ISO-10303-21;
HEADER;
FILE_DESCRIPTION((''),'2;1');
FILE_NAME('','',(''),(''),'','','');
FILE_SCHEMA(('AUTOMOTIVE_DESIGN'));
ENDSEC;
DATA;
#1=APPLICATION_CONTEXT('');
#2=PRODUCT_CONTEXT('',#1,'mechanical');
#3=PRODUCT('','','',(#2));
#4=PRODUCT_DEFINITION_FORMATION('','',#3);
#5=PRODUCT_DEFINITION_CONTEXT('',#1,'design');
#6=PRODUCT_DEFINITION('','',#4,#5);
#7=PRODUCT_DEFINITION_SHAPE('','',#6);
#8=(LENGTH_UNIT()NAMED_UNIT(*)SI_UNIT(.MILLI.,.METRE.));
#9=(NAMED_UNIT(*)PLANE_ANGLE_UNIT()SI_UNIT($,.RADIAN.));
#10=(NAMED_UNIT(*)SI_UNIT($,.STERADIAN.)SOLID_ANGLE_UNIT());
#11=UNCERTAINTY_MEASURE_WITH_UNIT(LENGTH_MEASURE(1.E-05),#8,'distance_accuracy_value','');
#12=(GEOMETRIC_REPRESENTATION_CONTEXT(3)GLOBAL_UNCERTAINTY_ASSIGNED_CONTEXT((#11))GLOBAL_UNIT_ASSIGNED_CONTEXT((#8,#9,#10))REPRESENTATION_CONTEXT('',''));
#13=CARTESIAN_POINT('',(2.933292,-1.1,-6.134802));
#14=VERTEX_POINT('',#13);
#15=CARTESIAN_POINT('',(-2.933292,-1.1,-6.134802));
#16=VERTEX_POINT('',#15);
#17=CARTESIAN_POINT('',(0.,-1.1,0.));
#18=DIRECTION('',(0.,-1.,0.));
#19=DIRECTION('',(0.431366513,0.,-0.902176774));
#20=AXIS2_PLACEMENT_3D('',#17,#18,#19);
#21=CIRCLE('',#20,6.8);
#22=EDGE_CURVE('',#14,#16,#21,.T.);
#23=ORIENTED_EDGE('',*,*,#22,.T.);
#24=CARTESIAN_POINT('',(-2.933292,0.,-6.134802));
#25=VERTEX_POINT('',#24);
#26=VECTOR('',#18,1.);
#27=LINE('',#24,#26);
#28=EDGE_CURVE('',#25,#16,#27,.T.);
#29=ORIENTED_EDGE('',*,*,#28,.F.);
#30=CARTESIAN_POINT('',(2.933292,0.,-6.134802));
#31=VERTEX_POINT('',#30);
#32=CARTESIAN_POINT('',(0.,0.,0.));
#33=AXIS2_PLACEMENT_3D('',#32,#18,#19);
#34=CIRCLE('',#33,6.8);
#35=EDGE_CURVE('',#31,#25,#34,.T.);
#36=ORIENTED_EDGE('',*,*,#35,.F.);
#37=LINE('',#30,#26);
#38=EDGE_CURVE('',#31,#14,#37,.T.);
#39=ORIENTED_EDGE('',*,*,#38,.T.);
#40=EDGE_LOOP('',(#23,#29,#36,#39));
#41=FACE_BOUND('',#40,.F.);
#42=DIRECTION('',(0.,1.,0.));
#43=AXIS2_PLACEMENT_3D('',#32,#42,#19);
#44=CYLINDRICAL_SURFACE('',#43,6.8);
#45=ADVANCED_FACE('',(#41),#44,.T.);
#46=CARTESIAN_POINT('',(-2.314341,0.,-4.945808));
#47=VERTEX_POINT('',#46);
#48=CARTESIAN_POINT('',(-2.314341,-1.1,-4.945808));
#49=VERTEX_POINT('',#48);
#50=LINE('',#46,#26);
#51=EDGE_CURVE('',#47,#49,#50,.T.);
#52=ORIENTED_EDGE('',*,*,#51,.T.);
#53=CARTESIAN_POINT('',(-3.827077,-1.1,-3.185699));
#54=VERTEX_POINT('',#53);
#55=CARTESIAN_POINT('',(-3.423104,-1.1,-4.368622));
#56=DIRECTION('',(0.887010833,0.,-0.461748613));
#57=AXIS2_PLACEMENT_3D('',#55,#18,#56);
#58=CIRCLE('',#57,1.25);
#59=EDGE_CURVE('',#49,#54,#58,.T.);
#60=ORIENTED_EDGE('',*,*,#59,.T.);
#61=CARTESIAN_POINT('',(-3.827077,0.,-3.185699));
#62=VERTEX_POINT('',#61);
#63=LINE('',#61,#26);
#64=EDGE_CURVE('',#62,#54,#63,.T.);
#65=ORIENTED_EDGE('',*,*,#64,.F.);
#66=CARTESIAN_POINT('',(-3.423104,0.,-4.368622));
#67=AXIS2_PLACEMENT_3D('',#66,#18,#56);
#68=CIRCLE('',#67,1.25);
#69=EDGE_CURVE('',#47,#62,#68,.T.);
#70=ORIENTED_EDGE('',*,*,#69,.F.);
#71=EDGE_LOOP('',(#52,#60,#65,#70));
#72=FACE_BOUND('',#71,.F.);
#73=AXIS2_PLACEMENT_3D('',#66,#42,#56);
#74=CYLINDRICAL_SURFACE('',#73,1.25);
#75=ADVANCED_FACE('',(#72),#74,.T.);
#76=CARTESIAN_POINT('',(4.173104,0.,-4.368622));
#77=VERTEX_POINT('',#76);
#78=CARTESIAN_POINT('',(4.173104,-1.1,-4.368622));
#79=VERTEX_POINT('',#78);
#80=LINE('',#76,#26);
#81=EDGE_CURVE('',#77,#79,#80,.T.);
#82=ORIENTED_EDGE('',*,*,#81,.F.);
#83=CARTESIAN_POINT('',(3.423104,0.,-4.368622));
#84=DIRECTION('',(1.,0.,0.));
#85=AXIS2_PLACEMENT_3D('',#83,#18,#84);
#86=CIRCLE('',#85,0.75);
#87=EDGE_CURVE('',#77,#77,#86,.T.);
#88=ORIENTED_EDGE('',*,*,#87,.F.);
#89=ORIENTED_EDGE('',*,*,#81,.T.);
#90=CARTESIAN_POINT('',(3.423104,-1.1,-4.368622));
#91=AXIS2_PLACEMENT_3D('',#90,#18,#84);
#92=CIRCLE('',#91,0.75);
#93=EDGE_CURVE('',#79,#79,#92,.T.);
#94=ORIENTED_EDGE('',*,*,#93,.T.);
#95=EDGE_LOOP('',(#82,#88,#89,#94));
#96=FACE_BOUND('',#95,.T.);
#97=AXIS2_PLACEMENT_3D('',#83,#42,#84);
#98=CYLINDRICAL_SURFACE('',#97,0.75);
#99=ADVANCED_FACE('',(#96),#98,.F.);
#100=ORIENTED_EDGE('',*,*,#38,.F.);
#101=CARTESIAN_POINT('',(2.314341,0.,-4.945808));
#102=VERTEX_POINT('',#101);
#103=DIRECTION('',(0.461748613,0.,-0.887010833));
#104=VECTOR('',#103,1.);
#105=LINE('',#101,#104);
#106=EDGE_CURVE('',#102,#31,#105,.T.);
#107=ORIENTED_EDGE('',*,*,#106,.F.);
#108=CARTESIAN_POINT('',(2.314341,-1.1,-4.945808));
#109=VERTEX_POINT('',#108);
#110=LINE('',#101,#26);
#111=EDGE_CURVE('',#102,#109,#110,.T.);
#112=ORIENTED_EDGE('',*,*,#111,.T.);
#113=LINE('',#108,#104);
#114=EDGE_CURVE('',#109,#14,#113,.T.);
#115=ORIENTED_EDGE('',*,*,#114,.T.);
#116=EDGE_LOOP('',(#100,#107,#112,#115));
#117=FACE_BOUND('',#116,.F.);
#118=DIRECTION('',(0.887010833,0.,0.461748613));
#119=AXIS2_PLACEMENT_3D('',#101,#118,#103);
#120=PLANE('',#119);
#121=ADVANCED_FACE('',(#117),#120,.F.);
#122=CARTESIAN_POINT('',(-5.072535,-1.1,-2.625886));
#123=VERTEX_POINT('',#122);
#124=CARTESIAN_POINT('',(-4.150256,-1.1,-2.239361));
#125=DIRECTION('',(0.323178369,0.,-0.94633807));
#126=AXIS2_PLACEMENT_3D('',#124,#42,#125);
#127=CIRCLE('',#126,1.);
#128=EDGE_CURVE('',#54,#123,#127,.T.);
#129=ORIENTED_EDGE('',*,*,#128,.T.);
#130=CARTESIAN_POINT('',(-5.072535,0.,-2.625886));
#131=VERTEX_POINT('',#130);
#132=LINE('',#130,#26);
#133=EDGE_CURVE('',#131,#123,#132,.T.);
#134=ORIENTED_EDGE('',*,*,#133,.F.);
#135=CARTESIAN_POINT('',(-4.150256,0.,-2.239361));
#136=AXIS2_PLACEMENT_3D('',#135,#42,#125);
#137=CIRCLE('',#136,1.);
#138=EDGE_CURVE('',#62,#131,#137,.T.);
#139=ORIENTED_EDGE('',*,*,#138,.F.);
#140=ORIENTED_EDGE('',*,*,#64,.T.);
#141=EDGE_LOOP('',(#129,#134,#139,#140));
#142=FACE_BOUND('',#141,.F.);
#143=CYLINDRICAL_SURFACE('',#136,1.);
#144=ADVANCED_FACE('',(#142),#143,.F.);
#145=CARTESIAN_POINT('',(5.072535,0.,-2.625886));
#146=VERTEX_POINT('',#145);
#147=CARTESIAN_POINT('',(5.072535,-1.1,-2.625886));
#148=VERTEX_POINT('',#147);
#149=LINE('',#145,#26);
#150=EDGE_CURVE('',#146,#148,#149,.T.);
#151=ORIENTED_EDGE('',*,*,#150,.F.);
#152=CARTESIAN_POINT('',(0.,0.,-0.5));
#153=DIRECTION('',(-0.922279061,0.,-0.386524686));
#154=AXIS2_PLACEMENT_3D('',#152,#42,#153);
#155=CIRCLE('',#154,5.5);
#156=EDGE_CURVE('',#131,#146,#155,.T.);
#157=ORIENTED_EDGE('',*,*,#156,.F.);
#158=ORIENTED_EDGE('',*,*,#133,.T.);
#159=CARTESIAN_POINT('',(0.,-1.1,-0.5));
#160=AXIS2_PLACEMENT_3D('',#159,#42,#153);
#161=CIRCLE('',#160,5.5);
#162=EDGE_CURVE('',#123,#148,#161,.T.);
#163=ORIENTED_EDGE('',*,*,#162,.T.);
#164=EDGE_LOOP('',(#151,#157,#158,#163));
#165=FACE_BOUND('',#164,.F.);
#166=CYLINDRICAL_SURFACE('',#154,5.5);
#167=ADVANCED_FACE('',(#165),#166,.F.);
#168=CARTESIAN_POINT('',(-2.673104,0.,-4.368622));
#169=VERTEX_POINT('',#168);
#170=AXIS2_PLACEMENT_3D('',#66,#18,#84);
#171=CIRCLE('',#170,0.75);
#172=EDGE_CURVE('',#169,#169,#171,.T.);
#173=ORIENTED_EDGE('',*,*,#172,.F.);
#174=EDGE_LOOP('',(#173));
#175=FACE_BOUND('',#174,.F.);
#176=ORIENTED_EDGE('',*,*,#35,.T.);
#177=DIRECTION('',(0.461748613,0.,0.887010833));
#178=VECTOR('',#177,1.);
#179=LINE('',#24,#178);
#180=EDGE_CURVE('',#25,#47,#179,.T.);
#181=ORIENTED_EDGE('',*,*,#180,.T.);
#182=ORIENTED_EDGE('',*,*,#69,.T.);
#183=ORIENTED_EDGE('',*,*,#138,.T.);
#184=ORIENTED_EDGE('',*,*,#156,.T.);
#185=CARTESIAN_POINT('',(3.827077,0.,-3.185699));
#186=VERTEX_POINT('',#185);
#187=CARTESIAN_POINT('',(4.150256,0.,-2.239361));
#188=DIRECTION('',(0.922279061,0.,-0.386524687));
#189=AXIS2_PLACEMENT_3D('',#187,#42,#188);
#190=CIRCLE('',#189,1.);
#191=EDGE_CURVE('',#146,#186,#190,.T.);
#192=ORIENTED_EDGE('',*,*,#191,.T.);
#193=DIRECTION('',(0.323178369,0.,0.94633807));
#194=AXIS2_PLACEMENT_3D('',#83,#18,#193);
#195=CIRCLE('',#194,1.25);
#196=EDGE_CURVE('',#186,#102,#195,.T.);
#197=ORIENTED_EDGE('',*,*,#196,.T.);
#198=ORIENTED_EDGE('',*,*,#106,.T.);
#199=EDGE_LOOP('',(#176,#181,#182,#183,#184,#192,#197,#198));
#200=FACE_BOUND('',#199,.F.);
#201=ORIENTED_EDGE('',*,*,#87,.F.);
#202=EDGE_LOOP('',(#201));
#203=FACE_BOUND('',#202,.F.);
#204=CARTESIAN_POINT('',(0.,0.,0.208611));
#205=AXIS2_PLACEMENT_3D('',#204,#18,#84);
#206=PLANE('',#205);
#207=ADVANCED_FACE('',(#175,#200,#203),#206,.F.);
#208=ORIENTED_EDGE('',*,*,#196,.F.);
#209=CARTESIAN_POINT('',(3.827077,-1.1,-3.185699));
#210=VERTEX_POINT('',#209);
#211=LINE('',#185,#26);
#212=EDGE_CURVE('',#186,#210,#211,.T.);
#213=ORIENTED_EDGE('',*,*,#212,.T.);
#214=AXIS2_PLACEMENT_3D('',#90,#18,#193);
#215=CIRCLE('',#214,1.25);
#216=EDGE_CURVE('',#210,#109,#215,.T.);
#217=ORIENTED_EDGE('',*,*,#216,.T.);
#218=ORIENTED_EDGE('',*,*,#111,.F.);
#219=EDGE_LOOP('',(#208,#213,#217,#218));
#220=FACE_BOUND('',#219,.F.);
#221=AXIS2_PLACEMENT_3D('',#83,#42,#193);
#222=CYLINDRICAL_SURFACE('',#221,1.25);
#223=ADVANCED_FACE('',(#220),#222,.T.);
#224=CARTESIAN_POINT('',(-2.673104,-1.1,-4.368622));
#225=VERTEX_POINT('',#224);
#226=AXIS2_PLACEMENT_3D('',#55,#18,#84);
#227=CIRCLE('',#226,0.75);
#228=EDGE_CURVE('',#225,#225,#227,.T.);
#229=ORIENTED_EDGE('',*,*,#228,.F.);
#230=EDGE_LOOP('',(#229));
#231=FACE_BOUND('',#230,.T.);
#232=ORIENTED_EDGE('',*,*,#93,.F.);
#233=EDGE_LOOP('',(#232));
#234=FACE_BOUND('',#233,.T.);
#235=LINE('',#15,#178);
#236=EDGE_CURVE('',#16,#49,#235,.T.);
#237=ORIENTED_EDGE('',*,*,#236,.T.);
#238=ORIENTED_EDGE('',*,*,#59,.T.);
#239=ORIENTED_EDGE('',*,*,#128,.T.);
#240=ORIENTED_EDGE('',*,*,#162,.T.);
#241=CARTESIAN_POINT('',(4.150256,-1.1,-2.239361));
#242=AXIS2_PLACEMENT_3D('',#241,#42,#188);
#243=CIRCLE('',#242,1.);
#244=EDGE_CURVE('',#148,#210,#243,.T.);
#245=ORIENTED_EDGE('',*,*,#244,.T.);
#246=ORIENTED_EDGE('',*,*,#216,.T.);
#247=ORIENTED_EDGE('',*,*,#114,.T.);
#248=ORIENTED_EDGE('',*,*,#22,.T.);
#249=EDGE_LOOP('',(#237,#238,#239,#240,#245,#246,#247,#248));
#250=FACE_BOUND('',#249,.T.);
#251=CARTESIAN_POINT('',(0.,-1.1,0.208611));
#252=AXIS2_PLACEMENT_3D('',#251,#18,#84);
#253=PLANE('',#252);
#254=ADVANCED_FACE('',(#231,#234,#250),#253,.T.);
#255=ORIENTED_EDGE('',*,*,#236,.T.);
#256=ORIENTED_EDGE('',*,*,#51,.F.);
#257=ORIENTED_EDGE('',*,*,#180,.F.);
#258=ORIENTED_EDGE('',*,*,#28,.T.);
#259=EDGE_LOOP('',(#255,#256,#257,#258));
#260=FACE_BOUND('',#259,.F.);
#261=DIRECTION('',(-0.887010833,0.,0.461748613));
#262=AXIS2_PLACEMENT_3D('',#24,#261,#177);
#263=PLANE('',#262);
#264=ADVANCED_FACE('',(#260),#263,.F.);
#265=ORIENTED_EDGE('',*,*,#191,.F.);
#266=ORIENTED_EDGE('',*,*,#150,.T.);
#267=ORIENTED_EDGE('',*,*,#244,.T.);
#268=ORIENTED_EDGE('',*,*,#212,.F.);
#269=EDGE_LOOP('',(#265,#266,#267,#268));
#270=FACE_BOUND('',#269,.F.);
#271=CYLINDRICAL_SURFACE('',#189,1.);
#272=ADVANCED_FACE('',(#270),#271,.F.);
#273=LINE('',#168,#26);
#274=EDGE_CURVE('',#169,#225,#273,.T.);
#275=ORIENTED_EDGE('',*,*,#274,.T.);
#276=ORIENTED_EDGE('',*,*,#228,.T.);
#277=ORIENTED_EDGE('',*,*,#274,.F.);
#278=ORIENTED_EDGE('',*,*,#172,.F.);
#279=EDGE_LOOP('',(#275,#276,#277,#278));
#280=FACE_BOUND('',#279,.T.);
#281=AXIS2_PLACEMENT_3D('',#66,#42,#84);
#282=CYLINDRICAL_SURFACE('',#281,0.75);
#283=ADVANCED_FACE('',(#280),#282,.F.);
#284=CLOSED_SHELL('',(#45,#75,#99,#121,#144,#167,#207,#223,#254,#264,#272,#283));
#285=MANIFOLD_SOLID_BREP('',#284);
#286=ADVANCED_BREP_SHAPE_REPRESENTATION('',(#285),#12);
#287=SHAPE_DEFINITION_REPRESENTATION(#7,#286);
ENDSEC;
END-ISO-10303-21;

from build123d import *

# Parameters (mm, degrees)
F0_R     = 0.75
F1_DEPTH = 1.1


# Not quite as in the source:
# - a feature of the source that left no trace in its solid (it failed there, or was rolled back) is left out


with BuildPart() as f1:
    # F0 (on Front) → F1 (new body)
    with BuildSketch(Plane.XZ):
        with BuildLine():
            Line((2.3143409039, -4.9458075121), (2.9332922899, -6.1348020622))
            ThreePointArc((2.9332922899, -6.1348020622), (0, 6.8), (-2.9332922899, -6.1348020622))
            Line((-2.9332922899, -6.1348020622), (-2.3143409039, -4.9458075121))
            ThreePointArc((-2.3143409039, -4.9458075121), (-2.4751182669, -3.5538688963), (-3.8270774065, -3.1856991587))
            ThreePointArc((-3.8270774065, -3.1856991587), (-4.5602291476, -3.1514585807), (-5.0725348367, -2.6258857756))
            ThreePointArc((-5.0725348367, -2.6258857756), (0, 5), (5.0725348367, -2.6258857756))
            ThreePointArc((5.0725348367, -2.6258857756), (4.5602291476, -3.1514585807), (3.8270774065, -3.1856991587))
            ThreePointArc((3.8270774065, -3.1856991587), (2.4751182669, -3.5538688963), (2.3143409039, -4.9458075121))
        make_face()
        with Locations((-3.4231044454, -4.3686217456)):
            Circle(F0_R, mode=Mode.SUBTRACT)
        with Locations((3.4231044454, -4.3686217456)):
            Circle(F0_R, mode=Mode.SUBTRACT)
    extrude(amount=F1_DEPTH)


solid = f1.part
